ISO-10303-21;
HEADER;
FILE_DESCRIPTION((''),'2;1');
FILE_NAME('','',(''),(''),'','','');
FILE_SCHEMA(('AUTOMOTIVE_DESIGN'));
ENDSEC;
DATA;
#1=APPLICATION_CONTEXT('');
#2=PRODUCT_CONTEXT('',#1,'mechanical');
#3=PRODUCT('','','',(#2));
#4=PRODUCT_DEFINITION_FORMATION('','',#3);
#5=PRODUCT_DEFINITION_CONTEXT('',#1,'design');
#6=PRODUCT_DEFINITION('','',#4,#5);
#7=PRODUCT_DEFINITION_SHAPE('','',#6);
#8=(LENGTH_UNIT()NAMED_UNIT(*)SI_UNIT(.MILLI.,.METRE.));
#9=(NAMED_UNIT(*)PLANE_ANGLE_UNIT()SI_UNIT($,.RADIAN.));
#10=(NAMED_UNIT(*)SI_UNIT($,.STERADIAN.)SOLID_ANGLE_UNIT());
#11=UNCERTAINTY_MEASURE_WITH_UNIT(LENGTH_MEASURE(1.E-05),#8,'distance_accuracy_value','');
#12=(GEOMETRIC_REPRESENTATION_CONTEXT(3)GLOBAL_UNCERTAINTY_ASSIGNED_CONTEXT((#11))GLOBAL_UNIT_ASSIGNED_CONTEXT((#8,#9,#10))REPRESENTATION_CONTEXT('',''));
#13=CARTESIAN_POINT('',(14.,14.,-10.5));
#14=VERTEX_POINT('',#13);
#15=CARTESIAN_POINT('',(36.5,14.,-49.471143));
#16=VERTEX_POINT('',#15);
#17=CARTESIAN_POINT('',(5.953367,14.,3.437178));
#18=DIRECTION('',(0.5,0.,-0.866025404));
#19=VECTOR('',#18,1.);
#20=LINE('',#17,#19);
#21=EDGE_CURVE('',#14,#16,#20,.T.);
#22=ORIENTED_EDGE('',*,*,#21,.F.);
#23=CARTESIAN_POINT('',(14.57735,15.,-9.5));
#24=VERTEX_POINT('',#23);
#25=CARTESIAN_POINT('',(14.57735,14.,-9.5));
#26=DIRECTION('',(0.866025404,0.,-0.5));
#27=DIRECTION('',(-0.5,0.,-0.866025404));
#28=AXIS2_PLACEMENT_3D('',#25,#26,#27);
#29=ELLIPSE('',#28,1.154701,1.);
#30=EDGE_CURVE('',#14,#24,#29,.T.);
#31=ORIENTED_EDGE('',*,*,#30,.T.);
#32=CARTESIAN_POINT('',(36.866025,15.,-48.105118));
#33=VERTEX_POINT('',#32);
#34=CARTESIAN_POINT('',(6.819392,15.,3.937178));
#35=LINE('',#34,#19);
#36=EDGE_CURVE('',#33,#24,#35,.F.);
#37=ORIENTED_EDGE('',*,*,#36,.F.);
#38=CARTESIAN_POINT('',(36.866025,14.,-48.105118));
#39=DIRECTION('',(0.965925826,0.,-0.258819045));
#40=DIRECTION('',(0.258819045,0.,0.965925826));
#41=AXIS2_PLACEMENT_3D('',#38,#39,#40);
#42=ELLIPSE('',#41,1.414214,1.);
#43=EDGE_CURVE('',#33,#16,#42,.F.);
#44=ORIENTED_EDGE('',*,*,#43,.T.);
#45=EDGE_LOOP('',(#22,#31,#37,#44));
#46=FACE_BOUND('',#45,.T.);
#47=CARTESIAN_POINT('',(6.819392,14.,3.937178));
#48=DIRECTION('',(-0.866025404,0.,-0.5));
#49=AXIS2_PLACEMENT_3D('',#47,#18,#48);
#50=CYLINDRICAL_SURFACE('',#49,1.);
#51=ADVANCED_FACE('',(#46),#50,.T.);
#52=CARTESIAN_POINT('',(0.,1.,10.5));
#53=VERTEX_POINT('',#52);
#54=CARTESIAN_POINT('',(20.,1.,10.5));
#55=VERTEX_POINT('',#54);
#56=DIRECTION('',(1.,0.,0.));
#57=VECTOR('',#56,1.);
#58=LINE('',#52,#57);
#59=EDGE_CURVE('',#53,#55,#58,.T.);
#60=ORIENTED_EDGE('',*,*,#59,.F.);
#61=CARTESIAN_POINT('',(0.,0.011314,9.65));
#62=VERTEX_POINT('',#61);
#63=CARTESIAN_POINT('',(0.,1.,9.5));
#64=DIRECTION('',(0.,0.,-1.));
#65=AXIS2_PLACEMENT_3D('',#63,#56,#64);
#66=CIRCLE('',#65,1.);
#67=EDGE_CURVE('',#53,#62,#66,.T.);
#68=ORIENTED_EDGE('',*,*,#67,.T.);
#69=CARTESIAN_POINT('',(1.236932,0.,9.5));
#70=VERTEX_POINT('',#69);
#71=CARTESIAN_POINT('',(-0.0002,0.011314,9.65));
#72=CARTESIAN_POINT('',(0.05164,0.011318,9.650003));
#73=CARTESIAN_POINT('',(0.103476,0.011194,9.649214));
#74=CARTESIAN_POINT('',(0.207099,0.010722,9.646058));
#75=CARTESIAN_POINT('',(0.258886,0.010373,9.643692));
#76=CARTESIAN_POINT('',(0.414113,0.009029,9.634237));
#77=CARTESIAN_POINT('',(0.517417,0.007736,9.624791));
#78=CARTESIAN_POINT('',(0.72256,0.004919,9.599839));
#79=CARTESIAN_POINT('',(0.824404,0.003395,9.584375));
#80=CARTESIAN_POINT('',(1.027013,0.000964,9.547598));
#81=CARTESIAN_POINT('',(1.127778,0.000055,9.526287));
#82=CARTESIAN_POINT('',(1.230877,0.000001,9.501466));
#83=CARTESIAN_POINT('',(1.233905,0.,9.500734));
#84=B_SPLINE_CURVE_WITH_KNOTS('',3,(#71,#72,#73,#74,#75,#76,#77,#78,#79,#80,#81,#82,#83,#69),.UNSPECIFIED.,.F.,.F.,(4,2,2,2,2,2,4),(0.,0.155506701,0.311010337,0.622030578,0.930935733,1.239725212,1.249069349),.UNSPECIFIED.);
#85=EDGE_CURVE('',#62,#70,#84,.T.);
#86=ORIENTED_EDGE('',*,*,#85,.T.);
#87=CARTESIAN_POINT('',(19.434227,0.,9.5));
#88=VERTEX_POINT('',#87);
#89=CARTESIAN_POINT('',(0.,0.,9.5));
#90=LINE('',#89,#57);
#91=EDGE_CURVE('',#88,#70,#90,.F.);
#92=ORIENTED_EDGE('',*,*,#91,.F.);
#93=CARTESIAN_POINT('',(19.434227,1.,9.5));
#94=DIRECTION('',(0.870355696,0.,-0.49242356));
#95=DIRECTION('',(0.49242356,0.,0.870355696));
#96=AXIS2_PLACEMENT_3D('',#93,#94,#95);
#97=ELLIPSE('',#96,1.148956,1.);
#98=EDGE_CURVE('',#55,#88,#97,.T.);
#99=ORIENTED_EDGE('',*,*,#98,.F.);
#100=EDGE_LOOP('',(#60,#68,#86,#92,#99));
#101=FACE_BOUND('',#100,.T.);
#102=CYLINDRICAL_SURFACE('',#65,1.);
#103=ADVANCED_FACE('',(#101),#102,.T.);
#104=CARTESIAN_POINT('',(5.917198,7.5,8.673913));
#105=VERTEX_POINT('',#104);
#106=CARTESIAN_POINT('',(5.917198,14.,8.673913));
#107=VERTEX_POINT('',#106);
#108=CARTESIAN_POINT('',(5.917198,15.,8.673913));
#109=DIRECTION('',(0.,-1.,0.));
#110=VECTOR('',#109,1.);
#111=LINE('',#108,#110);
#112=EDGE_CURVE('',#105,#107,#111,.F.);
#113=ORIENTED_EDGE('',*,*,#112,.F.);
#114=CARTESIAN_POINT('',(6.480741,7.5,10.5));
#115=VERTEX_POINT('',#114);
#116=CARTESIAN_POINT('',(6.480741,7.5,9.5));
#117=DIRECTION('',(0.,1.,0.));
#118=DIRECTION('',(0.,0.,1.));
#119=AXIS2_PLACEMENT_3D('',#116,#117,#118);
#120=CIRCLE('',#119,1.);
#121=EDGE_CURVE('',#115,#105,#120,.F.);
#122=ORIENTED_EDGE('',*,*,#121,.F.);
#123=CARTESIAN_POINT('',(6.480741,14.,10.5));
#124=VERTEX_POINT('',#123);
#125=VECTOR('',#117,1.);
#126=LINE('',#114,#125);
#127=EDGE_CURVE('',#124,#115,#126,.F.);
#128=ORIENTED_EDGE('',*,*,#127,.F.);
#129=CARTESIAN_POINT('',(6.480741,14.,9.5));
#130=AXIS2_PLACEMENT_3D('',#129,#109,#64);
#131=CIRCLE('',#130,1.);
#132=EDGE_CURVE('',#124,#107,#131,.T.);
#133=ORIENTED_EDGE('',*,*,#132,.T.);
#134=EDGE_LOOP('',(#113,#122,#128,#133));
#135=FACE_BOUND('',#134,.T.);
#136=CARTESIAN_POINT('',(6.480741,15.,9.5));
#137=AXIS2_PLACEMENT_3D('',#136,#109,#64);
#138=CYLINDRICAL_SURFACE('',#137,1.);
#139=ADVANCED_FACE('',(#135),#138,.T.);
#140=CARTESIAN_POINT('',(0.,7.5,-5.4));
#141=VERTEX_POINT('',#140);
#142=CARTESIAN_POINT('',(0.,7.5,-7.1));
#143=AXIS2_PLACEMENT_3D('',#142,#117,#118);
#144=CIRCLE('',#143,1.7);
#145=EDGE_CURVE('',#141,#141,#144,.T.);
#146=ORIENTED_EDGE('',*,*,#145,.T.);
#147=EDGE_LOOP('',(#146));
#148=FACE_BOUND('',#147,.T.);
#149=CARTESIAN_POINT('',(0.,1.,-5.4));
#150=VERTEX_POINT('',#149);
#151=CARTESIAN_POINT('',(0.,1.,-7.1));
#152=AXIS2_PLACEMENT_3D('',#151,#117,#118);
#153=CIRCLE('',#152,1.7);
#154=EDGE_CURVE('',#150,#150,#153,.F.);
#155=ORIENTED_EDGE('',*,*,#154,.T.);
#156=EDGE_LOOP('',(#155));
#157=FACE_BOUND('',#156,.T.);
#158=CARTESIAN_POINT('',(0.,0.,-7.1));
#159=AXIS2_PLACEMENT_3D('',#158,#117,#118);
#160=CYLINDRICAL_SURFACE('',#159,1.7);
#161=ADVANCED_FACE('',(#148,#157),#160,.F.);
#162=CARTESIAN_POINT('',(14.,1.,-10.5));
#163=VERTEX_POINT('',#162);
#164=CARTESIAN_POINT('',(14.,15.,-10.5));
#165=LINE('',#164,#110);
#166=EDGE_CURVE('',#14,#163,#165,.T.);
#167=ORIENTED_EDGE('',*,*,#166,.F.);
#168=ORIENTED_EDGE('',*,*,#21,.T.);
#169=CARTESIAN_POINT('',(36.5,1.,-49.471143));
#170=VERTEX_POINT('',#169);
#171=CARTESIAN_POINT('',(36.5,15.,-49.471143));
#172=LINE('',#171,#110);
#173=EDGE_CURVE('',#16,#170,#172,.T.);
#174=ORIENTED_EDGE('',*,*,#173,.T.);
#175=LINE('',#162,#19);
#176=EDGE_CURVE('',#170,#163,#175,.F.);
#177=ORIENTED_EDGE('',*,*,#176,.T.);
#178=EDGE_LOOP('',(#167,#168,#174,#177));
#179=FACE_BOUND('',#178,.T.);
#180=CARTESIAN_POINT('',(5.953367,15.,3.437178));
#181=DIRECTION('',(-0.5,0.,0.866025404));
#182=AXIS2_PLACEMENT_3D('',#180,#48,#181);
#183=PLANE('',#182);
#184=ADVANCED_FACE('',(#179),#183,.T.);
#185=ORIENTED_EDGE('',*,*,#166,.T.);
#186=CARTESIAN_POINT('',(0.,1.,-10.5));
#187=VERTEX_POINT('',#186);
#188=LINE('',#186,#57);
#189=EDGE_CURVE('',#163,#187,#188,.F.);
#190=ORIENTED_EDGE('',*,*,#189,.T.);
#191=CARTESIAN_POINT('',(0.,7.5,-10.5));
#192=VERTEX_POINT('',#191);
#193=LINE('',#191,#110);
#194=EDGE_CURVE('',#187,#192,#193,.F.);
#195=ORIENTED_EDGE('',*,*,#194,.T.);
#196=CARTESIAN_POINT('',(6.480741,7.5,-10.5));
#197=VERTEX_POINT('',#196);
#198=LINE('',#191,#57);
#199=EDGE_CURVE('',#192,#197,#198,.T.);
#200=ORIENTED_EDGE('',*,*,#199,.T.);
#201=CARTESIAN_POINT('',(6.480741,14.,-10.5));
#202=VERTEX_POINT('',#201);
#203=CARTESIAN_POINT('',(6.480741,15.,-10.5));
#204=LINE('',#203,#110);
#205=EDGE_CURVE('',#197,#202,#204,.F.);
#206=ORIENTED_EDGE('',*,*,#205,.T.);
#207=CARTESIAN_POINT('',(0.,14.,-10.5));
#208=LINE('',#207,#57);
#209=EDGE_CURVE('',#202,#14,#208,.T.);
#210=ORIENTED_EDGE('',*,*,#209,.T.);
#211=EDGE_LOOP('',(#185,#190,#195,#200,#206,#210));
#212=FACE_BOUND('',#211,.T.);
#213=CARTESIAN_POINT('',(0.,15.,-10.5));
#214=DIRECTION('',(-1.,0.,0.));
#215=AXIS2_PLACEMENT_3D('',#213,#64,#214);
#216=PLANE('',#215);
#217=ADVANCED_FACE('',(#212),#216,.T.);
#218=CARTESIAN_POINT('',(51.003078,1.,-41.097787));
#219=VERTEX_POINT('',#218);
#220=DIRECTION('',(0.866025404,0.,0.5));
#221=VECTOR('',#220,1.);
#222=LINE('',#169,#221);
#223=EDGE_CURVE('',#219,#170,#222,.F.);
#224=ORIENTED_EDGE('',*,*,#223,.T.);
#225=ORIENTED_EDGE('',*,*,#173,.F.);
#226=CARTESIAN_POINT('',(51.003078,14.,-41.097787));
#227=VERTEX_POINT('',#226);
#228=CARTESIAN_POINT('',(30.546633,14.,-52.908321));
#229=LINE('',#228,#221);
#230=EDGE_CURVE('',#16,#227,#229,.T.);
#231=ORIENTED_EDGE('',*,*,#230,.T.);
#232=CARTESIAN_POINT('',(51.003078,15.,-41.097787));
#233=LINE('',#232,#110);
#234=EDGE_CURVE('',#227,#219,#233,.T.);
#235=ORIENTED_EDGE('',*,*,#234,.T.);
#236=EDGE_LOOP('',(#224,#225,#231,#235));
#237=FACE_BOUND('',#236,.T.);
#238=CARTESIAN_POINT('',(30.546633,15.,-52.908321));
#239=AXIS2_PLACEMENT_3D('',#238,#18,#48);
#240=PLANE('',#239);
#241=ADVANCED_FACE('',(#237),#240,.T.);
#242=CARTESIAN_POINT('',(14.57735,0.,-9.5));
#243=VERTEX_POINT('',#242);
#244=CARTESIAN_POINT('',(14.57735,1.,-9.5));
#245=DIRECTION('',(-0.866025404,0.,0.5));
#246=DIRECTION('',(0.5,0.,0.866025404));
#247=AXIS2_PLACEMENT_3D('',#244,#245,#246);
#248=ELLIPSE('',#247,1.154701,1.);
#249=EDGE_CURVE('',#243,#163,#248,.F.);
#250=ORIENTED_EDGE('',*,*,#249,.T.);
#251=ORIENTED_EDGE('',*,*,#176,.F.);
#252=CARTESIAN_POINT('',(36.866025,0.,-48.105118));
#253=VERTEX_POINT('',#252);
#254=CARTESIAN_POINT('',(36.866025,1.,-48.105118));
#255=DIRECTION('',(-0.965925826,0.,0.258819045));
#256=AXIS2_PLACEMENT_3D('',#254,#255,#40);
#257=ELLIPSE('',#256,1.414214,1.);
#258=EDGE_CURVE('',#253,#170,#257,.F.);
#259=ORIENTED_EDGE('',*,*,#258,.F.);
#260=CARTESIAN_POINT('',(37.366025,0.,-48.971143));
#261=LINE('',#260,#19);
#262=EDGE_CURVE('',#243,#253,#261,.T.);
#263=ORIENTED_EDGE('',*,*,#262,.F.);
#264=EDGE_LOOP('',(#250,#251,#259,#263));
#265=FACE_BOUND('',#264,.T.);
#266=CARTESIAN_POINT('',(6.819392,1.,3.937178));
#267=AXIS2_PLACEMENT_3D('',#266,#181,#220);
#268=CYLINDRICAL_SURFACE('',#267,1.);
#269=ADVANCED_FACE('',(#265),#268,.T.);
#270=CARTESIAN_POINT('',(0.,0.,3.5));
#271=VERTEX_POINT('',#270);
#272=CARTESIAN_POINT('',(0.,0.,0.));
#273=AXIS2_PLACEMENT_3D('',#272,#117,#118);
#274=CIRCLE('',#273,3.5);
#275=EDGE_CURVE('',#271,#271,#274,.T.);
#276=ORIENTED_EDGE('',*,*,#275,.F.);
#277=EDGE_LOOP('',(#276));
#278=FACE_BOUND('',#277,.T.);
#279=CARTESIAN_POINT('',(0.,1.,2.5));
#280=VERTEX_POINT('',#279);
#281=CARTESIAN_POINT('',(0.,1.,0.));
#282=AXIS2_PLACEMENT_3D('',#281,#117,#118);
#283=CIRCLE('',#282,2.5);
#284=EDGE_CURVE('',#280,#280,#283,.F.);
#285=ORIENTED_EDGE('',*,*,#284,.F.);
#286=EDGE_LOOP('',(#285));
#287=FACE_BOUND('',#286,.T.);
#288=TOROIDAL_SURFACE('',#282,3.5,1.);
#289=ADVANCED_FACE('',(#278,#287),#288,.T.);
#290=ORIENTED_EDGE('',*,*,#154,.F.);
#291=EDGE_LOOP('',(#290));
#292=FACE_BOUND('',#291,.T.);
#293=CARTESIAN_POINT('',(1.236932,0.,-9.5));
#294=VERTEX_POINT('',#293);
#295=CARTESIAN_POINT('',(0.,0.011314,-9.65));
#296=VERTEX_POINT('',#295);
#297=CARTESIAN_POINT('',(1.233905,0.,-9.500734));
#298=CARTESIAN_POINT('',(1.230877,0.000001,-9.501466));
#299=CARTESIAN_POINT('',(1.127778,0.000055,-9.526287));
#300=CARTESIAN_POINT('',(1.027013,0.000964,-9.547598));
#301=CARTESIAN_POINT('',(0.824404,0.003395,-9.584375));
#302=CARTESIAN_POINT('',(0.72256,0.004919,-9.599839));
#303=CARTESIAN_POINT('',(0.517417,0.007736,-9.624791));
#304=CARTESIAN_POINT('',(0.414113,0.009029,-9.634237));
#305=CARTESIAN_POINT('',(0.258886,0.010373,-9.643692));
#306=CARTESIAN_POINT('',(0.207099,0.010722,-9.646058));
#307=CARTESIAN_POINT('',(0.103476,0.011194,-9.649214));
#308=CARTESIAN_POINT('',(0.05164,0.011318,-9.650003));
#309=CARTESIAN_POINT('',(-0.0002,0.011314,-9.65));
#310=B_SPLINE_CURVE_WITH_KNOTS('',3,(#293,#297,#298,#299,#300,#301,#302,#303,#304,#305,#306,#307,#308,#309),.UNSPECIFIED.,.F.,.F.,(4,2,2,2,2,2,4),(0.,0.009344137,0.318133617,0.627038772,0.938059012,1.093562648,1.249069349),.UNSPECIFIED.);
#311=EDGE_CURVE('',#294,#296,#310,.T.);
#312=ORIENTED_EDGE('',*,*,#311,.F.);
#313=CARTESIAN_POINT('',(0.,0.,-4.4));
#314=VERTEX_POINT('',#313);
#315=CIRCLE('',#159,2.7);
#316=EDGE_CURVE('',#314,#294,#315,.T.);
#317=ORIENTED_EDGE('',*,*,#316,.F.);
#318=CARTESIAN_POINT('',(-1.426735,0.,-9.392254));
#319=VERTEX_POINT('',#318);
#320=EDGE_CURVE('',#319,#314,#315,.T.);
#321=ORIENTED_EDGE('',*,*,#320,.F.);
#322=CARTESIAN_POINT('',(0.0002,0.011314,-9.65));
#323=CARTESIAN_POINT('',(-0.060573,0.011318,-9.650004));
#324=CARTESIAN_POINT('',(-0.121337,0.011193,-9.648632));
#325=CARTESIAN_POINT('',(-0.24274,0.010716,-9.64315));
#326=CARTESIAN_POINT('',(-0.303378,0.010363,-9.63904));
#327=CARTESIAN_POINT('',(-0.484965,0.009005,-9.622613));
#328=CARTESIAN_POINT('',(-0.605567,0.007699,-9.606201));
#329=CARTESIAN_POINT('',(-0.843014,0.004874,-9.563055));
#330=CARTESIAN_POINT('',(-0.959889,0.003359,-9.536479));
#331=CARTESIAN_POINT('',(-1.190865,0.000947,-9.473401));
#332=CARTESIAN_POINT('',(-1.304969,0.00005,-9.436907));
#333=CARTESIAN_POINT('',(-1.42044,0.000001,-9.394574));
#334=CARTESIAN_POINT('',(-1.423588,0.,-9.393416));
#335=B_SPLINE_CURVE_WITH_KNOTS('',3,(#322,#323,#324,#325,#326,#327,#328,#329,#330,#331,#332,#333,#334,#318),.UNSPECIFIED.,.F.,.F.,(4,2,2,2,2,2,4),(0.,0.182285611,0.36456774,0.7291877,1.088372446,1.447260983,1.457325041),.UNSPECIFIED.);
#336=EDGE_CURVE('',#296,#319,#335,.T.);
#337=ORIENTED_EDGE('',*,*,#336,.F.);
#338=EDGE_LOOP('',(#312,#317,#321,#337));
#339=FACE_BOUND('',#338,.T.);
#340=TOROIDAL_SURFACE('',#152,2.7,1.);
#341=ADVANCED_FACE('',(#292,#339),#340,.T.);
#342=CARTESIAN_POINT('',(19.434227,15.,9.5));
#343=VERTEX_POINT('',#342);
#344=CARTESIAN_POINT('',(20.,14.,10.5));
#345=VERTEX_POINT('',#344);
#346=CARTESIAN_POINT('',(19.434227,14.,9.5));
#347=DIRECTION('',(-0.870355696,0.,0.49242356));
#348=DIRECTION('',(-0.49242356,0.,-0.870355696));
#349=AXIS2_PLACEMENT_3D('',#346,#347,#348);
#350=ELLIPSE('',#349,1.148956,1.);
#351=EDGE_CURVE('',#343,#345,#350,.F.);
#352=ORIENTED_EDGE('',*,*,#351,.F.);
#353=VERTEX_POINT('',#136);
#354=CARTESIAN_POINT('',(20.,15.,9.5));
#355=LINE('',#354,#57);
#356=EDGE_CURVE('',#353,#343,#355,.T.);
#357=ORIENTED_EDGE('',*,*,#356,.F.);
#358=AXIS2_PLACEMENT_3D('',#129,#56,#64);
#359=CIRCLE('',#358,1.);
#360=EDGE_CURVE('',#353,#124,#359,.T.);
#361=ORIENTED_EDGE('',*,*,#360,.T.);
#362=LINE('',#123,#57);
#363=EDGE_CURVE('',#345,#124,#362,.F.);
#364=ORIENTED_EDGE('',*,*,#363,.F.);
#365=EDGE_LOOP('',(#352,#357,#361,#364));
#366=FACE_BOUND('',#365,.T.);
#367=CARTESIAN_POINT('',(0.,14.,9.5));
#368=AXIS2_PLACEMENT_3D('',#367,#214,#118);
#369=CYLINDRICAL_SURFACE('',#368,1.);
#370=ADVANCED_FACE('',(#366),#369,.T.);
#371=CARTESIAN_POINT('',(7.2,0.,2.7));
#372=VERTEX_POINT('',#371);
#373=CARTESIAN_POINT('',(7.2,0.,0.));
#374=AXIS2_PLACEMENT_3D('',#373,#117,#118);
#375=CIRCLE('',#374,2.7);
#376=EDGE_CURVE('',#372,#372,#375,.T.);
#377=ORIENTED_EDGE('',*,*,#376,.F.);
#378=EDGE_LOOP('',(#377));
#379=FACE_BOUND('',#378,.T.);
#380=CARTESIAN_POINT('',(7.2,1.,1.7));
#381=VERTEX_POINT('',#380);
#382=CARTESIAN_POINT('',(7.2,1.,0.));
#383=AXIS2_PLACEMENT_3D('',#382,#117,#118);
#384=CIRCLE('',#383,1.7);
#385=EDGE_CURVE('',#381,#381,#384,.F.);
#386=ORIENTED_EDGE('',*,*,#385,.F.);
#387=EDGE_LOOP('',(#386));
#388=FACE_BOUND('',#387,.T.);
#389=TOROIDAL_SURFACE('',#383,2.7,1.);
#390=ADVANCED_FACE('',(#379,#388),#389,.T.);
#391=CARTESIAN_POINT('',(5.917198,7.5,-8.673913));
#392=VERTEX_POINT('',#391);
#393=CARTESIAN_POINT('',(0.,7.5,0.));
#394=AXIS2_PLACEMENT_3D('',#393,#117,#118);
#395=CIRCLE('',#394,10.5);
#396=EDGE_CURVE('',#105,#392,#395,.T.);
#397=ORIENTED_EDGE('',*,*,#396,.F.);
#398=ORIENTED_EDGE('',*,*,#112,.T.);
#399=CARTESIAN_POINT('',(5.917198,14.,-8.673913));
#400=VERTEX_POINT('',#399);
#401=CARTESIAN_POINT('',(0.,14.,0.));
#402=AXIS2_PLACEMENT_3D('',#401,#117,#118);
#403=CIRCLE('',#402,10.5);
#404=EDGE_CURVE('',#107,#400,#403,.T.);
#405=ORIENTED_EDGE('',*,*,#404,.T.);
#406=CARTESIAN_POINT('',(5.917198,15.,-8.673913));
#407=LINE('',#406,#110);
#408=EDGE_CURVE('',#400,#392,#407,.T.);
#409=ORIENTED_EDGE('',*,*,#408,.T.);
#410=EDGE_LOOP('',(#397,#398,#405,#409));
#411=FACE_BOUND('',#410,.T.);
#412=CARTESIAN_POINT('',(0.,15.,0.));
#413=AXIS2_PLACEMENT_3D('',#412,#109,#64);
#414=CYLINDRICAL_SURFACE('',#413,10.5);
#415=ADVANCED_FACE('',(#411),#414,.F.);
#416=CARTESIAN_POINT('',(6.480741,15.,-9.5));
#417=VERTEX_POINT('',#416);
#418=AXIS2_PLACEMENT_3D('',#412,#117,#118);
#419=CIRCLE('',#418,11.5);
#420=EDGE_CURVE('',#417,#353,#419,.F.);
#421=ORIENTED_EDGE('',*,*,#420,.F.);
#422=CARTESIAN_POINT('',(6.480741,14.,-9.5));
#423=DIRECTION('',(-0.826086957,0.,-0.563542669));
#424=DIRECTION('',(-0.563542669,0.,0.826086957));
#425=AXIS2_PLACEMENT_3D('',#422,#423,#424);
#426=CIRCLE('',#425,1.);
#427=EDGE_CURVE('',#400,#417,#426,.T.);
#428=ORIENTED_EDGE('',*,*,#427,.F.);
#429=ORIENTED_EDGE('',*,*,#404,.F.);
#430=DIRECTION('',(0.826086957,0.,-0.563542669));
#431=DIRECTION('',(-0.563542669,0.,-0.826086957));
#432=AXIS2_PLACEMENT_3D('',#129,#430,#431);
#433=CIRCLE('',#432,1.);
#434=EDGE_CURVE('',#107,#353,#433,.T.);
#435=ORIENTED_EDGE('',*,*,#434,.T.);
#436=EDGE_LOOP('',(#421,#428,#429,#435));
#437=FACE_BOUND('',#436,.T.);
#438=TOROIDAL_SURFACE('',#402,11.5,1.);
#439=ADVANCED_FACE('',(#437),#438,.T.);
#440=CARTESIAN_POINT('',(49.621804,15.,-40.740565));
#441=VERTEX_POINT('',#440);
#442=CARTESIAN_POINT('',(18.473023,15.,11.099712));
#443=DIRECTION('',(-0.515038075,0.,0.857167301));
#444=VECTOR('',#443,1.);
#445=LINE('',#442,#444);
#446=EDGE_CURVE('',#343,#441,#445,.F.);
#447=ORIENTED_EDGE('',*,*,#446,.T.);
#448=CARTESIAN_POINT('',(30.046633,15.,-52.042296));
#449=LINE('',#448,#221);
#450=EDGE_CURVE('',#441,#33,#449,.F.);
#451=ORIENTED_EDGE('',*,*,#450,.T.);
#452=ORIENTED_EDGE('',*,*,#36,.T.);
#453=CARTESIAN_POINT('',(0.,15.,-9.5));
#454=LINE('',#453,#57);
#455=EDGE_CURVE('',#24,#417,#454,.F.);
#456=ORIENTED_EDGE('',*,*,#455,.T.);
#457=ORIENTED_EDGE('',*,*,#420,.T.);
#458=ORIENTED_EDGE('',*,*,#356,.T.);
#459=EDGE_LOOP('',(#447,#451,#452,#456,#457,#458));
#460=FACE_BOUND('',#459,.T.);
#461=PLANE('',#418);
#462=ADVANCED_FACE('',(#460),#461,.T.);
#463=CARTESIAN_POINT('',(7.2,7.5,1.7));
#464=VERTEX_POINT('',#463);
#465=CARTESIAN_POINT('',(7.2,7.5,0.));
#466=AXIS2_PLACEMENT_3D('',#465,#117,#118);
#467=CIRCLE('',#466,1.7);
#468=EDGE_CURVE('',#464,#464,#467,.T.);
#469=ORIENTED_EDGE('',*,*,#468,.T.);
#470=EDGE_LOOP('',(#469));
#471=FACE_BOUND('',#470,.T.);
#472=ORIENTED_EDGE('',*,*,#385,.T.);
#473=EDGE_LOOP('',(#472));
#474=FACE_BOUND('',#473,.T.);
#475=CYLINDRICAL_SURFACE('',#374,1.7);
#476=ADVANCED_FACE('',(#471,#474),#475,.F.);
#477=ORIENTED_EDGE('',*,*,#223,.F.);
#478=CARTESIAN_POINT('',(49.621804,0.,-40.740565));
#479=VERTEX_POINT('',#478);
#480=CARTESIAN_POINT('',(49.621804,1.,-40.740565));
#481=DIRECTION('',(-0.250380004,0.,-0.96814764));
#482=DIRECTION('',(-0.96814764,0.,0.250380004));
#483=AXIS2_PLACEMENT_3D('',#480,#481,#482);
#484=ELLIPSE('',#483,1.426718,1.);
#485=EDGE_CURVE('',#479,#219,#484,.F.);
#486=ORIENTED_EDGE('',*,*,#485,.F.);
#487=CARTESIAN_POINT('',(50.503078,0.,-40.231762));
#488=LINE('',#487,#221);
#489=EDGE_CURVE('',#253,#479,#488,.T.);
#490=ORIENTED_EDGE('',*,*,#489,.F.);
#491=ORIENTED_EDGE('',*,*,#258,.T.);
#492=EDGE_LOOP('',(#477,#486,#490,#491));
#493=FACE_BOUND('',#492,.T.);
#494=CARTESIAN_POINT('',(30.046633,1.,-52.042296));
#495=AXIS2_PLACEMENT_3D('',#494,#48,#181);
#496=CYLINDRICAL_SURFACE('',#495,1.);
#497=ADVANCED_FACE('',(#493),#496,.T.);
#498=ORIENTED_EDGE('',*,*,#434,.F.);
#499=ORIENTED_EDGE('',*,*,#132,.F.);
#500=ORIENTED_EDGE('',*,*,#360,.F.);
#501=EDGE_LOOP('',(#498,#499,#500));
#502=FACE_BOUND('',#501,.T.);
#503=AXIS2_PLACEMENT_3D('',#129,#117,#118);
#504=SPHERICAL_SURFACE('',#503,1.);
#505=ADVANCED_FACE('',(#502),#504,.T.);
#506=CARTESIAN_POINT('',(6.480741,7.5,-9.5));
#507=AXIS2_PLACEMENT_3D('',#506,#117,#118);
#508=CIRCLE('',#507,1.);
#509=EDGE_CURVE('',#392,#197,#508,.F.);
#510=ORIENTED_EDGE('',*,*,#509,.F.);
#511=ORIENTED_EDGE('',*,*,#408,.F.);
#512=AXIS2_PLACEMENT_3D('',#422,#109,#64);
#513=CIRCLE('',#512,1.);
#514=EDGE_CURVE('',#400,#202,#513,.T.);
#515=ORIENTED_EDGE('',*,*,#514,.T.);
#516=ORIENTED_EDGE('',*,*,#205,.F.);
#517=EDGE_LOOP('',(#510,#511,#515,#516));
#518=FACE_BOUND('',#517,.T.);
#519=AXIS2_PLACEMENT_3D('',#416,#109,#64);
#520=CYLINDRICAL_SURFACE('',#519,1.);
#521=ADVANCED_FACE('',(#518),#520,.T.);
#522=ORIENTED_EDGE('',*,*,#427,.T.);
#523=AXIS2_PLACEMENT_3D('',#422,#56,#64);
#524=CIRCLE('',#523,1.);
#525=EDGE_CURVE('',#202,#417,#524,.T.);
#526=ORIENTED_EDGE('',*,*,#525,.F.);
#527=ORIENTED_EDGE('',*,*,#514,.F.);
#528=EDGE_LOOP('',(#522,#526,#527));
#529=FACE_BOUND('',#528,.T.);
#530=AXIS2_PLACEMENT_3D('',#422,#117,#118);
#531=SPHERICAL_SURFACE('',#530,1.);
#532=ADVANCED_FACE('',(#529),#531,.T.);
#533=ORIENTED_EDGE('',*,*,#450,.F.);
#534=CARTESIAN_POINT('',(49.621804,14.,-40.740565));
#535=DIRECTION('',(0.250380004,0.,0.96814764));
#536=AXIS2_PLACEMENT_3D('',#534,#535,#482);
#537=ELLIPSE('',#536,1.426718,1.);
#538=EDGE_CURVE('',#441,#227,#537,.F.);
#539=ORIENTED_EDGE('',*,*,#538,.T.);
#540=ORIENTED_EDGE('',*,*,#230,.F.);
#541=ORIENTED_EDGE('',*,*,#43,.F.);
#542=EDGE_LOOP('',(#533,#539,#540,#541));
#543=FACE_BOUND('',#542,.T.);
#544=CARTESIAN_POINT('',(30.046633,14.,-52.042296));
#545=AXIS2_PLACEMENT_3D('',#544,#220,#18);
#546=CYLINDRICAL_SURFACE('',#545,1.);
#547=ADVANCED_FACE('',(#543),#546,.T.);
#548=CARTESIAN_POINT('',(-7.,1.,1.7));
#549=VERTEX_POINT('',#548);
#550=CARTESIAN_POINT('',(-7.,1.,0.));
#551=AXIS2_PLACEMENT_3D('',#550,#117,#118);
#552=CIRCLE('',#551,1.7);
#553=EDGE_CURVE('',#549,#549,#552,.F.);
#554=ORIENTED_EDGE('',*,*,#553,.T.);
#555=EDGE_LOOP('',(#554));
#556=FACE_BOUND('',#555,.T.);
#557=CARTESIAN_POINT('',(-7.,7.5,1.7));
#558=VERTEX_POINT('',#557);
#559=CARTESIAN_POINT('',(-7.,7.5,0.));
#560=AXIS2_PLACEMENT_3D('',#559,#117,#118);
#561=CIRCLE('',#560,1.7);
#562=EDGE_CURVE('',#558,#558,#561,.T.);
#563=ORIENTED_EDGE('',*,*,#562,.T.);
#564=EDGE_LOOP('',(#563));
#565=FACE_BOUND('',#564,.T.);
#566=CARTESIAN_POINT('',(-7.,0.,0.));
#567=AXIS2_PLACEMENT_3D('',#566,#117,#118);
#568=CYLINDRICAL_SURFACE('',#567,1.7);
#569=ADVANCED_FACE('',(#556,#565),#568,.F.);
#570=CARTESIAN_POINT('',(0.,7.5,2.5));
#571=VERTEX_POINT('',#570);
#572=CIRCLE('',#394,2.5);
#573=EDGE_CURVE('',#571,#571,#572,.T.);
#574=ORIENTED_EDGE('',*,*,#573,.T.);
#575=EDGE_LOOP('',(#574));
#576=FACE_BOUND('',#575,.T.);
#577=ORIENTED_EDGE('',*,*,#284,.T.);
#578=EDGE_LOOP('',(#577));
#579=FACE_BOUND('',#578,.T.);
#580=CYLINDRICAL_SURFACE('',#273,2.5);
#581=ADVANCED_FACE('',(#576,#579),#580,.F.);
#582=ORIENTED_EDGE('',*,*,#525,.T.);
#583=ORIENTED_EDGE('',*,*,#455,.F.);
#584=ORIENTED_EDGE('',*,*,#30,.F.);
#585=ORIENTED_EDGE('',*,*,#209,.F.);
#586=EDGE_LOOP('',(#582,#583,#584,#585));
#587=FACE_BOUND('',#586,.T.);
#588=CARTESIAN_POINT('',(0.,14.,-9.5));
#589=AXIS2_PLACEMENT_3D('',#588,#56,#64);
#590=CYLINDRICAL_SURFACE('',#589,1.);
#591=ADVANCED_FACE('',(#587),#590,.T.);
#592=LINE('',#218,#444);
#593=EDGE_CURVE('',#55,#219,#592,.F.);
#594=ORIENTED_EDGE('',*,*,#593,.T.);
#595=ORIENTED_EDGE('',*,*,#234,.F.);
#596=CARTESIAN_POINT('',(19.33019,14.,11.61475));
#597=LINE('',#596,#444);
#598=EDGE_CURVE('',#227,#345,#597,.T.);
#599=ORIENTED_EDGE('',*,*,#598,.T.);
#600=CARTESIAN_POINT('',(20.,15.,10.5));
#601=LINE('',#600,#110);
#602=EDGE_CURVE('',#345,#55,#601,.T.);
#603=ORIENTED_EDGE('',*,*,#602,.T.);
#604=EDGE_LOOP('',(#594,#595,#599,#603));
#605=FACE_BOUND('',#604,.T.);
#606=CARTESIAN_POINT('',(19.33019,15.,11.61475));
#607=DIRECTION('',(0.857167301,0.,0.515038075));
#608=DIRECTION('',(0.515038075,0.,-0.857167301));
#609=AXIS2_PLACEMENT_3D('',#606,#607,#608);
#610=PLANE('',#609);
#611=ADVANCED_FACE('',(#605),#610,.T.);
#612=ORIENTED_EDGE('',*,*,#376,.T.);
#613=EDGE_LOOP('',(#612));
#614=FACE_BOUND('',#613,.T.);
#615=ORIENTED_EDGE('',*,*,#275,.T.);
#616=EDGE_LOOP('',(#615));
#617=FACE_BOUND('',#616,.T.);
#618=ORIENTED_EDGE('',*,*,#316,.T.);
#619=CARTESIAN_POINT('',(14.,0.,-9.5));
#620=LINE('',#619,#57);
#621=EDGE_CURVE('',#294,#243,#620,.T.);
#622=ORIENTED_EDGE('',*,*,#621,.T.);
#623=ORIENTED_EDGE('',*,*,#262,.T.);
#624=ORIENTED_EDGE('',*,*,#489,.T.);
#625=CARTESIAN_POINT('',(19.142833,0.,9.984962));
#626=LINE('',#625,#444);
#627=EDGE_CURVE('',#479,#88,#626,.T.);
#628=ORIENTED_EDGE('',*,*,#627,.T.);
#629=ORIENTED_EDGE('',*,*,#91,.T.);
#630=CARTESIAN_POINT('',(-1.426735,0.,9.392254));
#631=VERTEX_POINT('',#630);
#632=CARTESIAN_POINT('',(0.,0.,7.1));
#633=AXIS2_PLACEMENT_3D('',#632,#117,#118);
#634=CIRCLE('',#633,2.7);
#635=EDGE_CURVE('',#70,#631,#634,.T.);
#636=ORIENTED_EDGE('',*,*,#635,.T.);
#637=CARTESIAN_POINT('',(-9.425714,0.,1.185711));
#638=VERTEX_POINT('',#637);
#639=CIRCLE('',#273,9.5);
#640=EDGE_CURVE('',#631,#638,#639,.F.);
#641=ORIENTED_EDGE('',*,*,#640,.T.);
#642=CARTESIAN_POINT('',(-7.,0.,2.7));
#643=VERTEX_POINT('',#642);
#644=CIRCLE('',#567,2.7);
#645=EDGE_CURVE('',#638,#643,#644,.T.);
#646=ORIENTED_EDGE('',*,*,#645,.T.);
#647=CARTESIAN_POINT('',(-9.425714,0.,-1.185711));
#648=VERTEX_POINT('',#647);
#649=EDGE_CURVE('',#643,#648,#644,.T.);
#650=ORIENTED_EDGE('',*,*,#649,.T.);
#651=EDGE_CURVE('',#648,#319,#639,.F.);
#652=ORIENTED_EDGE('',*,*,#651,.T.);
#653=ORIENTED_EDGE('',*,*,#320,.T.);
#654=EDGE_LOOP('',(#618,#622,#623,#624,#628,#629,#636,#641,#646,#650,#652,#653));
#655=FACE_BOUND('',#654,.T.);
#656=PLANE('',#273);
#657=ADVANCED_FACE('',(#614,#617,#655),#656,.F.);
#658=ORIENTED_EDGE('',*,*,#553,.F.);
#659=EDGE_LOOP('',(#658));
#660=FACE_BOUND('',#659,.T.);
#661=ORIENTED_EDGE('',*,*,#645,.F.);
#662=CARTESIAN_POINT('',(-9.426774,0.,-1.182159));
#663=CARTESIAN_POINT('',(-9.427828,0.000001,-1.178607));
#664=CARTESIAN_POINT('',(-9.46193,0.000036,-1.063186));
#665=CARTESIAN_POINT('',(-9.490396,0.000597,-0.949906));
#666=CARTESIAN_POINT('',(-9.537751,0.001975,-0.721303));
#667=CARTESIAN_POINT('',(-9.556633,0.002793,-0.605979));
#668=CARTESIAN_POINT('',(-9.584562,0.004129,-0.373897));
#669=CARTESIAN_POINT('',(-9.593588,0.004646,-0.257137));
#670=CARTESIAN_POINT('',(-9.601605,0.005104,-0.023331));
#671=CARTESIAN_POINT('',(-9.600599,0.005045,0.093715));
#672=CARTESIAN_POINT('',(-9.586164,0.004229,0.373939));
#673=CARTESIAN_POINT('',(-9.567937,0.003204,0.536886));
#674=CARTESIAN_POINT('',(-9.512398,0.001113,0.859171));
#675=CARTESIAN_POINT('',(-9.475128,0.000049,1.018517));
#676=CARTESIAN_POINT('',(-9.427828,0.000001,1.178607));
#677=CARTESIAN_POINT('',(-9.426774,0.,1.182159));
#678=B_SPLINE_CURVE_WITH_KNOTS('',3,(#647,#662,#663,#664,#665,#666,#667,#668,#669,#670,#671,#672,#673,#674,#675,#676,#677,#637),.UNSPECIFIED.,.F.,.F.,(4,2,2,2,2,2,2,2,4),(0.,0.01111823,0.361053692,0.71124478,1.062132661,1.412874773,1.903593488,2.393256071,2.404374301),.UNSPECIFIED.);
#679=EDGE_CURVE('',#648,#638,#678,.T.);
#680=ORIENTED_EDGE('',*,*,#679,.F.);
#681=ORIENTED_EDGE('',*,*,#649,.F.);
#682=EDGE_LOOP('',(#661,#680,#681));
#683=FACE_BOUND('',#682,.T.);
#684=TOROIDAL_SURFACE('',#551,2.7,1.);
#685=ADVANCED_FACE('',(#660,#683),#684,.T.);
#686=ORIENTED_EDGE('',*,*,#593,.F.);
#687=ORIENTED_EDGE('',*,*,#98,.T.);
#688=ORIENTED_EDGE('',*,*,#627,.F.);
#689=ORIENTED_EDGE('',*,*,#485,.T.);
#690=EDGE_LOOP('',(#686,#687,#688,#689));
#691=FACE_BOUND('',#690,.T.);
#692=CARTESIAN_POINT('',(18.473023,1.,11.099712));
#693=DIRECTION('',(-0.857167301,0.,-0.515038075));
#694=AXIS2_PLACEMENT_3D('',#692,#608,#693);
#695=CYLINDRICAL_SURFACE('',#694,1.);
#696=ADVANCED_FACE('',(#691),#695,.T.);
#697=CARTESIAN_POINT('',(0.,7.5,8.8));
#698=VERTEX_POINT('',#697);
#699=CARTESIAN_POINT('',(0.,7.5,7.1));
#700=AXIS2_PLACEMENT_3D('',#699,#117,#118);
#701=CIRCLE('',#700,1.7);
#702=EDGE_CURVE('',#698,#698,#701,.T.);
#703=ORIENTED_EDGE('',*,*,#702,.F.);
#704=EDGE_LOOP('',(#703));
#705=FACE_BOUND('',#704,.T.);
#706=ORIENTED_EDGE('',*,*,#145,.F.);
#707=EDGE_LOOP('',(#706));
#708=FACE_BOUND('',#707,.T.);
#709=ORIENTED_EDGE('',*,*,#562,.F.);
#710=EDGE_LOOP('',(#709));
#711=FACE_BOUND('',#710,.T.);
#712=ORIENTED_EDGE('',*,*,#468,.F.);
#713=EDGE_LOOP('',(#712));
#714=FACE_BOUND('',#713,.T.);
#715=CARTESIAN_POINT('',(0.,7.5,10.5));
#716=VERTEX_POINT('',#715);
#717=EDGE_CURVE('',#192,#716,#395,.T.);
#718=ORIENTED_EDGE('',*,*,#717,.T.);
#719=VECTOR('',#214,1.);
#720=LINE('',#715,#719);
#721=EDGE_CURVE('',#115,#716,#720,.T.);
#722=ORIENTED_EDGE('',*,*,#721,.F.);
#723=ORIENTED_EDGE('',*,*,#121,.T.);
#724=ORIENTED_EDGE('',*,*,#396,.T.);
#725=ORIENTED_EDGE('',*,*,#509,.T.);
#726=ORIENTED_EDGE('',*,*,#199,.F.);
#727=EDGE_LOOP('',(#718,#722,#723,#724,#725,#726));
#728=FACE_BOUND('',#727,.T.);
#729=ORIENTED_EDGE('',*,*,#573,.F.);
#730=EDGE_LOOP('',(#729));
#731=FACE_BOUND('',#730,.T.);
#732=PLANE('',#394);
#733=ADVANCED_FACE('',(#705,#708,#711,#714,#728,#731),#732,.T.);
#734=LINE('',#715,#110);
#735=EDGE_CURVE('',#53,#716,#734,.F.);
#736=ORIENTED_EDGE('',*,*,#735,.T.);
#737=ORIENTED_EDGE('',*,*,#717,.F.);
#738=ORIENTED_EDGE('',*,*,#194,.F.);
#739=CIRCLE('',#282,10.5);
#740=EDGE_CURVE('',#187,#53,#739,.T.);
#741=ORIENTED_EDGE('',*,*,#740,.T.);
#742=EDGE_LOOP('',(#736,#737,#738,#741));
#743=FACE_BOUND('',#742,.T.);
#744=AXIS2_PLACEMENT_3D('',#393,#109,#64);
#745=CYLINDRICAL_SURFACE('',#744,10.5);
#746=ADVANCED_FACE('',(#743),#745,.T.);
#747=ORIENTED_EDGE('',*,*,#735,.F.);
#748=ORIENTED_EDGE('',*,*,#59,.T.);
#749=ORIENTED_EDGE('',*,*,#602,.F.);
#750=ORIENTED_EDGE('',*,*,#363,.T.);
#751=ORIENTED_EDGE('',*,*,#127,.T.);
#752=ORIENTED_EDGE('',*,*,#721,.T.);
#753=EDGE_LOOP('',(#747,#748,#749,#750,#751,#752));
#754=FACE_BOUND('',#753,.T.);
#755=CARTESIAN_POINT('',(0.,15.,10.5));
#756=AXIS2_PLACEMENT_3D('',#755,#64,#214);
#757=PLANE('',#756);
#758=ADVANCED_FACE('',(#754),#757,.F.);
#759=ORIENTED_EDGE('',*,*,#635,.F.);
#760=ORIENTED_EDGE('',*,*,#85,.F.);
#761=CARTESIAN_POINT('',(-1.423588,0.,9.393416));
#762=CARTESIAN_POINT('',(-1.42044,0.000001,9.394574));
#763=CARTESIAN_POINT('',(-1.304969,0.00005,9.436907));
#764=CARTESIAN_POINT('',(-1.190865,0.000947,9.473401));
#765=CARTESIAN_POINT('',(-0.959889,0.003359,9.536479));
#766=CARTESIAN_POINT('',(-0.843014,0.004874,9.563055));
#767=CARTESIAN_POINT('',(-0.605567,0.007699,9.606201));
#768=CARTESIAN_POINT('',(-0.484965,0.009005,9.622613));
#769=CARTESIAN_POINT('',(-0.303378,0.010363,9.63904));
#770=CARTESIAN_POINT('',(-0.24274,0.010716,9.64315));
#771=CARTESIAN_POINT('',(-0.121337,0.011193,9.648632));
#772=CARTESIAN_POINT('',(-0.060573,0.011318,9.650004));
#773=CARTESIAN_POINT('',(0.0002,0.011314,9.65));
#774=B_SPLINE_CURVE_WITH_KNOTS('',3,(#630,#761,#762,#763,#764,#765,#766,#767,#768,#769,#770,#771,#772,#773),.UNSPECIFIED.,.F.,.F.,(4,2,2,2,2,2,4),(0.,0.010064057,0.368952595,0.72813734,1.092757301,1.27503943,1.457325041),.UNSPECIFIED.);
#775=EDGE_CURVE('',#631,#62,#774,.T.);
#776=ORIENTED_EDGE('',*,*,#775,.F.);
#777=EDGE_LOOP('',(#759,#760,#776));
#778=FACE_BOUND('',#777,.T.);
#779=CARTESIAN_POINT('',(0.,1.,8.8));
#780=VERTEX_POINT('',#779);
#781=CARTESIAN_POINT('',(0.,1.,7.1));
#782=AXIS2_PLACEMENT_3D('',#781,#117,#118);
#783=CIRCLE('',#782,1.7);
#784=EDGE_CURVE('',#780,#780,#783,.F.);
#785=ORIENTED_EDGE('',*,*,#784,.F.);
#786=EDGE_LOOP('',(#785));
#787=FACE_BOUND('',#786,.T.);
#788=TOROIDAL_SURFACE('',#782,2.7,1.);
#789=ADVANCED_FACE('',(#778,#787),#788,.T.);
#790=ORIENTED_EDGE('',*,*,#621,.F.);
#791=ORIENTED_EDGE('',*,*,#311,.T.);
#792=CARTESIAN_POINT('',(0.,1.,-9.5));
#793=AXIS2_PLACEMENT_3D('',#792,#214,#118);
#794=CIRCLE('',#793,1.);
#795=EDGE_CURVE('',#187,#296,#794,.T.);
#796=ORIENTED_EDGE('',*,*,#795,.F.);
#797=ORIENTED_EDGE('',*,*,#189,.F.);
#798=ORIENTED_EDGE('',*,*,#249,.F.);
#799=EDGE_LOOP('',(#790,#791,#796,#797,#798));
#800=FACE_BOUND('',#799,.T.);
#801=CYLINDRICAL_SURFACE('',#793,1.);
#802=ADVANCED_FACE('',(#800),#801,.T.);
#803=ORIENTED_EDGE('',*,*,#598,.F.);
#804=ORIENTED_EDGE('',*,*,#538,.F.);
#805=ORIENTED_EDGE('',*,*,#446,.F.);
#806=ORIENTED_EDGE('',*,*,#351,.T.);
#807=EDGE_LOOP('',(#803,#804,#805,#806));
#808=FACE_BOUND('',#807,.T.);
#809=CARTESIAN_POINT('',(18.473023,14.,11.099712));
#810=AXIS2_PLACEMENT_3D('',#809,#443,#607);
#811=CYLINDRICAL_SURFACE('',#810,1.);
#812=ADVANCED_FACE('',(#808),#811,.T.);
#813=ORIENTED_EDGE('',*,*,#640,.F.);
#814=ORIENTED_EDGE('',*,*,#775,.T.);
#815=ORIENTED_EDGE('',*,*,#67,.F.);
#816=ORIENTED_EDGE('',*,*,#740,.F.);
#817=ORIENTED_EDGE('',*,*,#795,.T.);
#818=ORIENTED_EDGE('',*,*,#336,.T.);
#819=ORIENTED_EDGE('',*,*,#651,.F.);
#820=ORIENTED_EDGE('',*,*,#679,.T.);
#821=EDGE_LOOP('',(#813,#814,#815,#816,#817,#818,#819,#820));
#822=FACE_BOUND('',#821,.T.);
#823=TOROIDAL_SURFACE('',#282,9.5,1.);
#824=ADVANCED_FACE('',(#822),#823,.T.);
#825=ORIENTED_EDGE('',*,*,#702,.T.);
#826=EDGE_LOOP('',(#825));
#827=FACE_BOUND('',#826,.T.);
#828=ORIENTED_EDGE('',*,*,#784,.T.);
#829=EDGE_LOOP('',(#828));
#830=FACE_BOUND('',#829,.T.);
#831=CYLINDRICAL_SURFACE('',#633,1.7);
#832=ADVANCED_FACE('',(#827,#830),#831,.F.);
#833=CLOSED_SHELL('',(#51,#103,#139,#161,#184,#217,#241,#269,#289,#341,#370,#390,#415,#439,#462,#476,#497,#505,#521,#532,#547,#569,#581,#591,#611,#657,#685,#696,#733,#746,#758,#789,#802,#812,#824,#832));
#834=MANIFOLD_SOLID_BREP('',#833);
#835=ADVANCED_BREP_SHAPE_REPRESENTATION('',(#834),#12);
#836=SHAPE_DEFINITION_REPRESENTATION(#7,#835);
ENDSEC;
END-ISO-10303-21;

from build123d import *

# Parameters (mm, degrees)
BOSS_EXTRUDE1_DEPTH = 15
SKETCH2_R           = 10.5
BOSS_EXTRUDE2_DEPTH = 7.5
FILLET1_START       = 7.5
FILLET1_DEPTH       = 8.5
SKETCH3_R           = 2.5
SKETCH3_R_2         = 1.7
CUT_EXTRUDE1_DEPTH  = 72.448988785
FILLET4_R           = 1


with BuildPart() as part:
    # Sketch1 → Boss-Extrude1 (new body)
    with BuildSketch(Plane(origin=(0, 0, 0), x_dir=(1, 0, 0), z_dir=(0, 1, 0))):
        with BuildLine():
            ThreePointArc((10.5, 0), (7.424621202, -7.424621202), (0, -10.5))
            Line((0, -10.5), (20, -10.5))
            Line((20, -10.5), (51.003078258, 41.097787034))
            Line((51.003078258, 41.097787034), (36.5, 49.47114317))
            Line((36.5, 49.47114317), (14, 10.5))
            Line((14, 10.5), (0, 10.5))
            ThreePointArc((0, 10.5), (7.424621202, 7.424621202), (10.5, 0))
        make_face()
    extrude(amount=BOSS_EXTRUDE1_DEPTH)

    # Sketch2 → Boss-Extrude2 (add)
    with BuildSketch(Plane(origin=(0, 0, 0), x_dir=(1, 0, 0), z_dir=(0, 1, 0))):
        Circle(SKETCH2_R)
    extrude(amount=BOSS_EXTRUDE2_DEPTH)

    # Fillet1: read off the stored shape, not the designer's step
    # Fillet1 outline → Fillet1 (cut)
    with BuildSketch(Plane(origin=(0, 0, 0), x_dir=(1, 0, 0), z_dir=(0, 1, 0)).offset(FILLET1_START)):
        with BuildLine():
            ThreePointArc((0, 10.5), (3.096281079, 10.033097402), (5.917198029, 8.673913043))
            ThreePointArc((5.917198029, 8.673913043), (5.525207613, 9.794883912), (6.480740698, 10.5))
            Line((6.480740698, 10.5), (0, 10.5))
        make_face()
        with BuildLine():
            ThreePointArc((6.480740698, -10.5), (5.525207613, -9.794883912), (5.917198029, -8.673913043))
            ThreePointArc((5.917198029, -8.673913043), (3.096281079, -10.033097402), (0, -10.5))
            Line((0, -10.5), (6.480740698, -10.5))
        make_face()
    extrude(amount=FILLET1_DEPTH, mode=Mode.SUBTRACT)

    # Sketch3 → Cut-Extrude1 (cut, through all)
    with BuildSketch(Plane(origin=(0, 7.5, 0), x_dir=(1, 0, 0), z_dir=(0, 1, 0))):
        with Locations(Location((0, 0, 0), (0, 0, 270))):
            Circle(SKETCH3_R)
        with Locations(Location((0, 7.1, 0), (0, 0, 270))):
            Circle(SKETCH3_R_2)
        with Locations(Location((0, -7.1, 0), (0, 0, 270))):
            Circle(SKETCH3_R_2)
        with Locations(Location((-7, 0, 0), (0, 0, 270))):
            Circle(SKETCH3_R_2)
        with Locations(Location((7.2, 0, 0), (0, 0, 270))):
            Circle(SKETCH3_R_2)
    extrude(amount=-CUT_EXTRUDE1_DEPTH, mode=Mode.SUBTRACT)

    # Fillet4
    # the kernel refuses this fillet: 1 mm, written as the material it takes off along each edge
    with BuildSketch(Plane(origin=(18.712404813, 15, 12.642918252), x_dir=(0, -1, 0), z_dir=(0.5150380749100582, 0, -0.85716730070211))) as fillet4_piece_1:
        with BuildLine():
            CenterArc((FILLET4_R, FILLET4_R), FILLET4_R, 180, 90)
            Line((0, FILLET4_R), (0, 0))
            Line((0, 0), (FILLET4_R, 0))
        make_face()
    extrude(amount=65.195701576, mode=Mode.SUBTRACT)
    with BuildSketch(Plane(origin=(53.168141767, 15, -39.847787034), x_dir=(0, -1, 0), z_dir=(-0.8660254037844399, 0, -0.49999999999999795))) as fillet4_piece_2:
        with BuildLine():
            CenterArc((FILLET4_R, FILLET4_R), FILLET4_R, 180, 90)
            Line((0, FILLET4_R), (0, 0))
            Line((0, 0), (FILLET4_R, 0))
        make_face()
    extrude(amount=21.746712272, mode=Mode.SUBTRACT)
    with BuildSketch(Plane(origin=(0, 0, 0), x_dir=(0, 0, -1), z_dir=(1, 0, 0))) as fillet4_piece_3:
        with BuildLine():
            CenterArc((10.5 - FILLET4_R, FILLET4_R), FILLET4_R, 270, 90)
            Line((10.5, FILLET4_R), (10.5, 0))
            Line((10.5, 0), (10.5 - FILLET4_R, 0))
        make_face()
    revolve(axis=Axis((0, 0, 0), (0, 1, 0)), revolution_arc=180, mode=Mode.SUBTRACT)
    with BuildSketch(Plane(origin=(37.75, 15, -51.63620668), x_dir=(0.8660254037844399, 0, 0.4999999999999977), z_dir=(-0.4999999999999977, 0, 0.8660254037844399))) as fillet4_piece_4_section:
        with BuildLine():
            CenterArc((FILLET4_R, -FILLET4_R), FILLET4_R, 90, 90)
            Line((0, -FILLET4_R), (0, 0))
            Line((0, 0), (FILLET4_R, 0))
        make_face()
    fillet4_piece_4 = extrude(amount=50, mode=Mode.PRIVATE)
    fillet4_piece_4 = split(fillet4_piece_4, bisect_by=Plane(origin=(37.75, 15, -10.5), z_dir=(0, 0, -1)), keep=Keep.TOP, mode=Mode.PRIVATE)
    add(fillet4_piece_4, mode=Mode.SUBTRACT)
    with BuildSketch(Plane(origin=(0, 15, 0), x_dir=(0.563542669449255, 0, 0.8260869565064005), z_dir=(-0.8260869565064005, 0, 0.563542669449255))) as fillet4_piece_5:
        with BuildLine():
            CenterArc((10.5 + FILLET4_R, -FILLET4_R), FILLET4_R, 90, 90)
            Line((10.5, -FILLET4_R), (10.5, 0))
            Line((10.5, 0), (10.5 + FILLET4_R, 0))
        make_face()
    revolve(axis=Axis((0, 15, 0), (0, 1, 0)), revolution_arc=111.397694483, mode=Mode.SUBTRACT)
    with BuildSketch(Plane(origin=(16.5, 15, -10.5), x_dir=(0, 0, 1), z_dir=(-1, 0, 0))) as fillet4_piece_6_section:
        with BuildLine():
            CenterArc((FILLET4_R, -FILLET4_R), FILLET4_R, 90, 90)
            Line((0, -FILLET4_R), (0, 0))
            Line((0, 0), (FILLET4_R, 0))
        make_face()
    fillet4_piece_6 = extrude(amount=10.019259302, mode=Mode.PRIVATE)
    fillet4_piece_6 = split(fillet4_piece_6, bisect_by=Plane(origin=(14.625, 15, -11.582531755), z_dir=(-0.8660254037844399, 0, -0.4999999999999977)), keep=Keep.TOP, mode=Mode.PRIVATE)
    add(fillet4_piece_6, mode=Mode.SUBTRACT)
    with BuildSketch(Plane(origin=(6.480740698, 15, 10.5), x_dir=(0, -1, 0), z_dir=(1, 0, 0))) as fillet4_piece_7:
        with BuildLine():
            CenterArc((FILLET4_R, FILLET4_R), FILLET4_R, 180, 90)
            Line((0, FILLET4_R), (0, 0))
            Line((0, 0), (FILLET4_R, 0))
        make_face()
    extrude(amount=16.019259302, mode=Mode.SUBTRACT)
    with BuildSketch(Plane(origin=(6.480740699, 15, 9.499999999), x_dir=(-1.3777317057953908e-09, 0, 1.0), z_dir=(1.0, 0, 1.3777317057953908e-09))) as fillet4_piece_8:
        with BuildLine():
            CenterArc((1.000000001 - FILLET4_R, FILLET4_R), FILLET4_R, 270, 90)
            Line((1.000000001, FILLET4_R), (1.000000001, 0))
            Line((1.000000001, 0), (1.000000001 - FILLET4_R, 0))
        make_face()
    revolve(axis=Axis((6.480740699, 15, 9.499999999), (0, -1, 0)), revolution_arc=145.698847118, mode=Mode.SUBTRACT)
    with BuildSketch(Plane(origin=(6.480740699, 15, -9.499999999), x_dir=(-0.5635426700904216, 0, 0.8260869560690076), z_dir=(0.8260869560690076, 0, 0.5635426700904216))) as fillet4_piece_9:
        with BuildLine():
            CenterArc((1.000000001 - FILLET4_R, FILLET4_R), FILLET4_R, 270, 90)
            Line((1.000000001, FILLET4_R), (1.000000001, 0))
            Line((1.000000001, 0), (1.000000001 - FILLET4_R, 0))
        make_face()
    revolve(axis=Axis((6.480740699, 15, -9.499999999), (0, -1, 0)), revolution_arc=145.698847118, mode=Mode.SUBTRACT)
    with BuildSketch(Plane(origin=(0, 0, -7.1), x_dir=(0, 0, 1), z_dir=(-1, 0, 0))) as fillet4_piece_10:
        with BuildLine():
            CenterArc((1.7 + FILLET4_R, FILLET4_R), FILLET4_R, 180, 90)
            Line((1.7, FILLET4_R), (1.7, 0))
            Line((1.7, 0), (1.7 + FILLET4_R, 0))
        make_face()
    revolve(axis=Axis((0, 0, -7.1), (0, 1, 0)), mode=Mode.SUBTRACT)
    with BuildSketch(Plane(origin=(0, 0, 7.1), x_dir=(0, 0, 1), z_dir=(-1, 0, 0))) as fillet4_piece_11:
        with BuildLine():
            CenterArc((1.7 + FILLET4_R, FILLET4_R), FILLET4_R, 180, 90)
            Line((1.7, FILLET4_R), (1.7, 0))
            Line((1.7, 0), (1.7 + FILLET4_R, 0))
        make_face()
    revolve(axis=Axis((0, 0, 7.1), (0, 1, 0)), mode=Mode.SUBTRACT)
    with BuildSketch(Plane(origin=(-7, 0, 0), x_dir=(0, 0, 1), z_dir=(-1, 0, 0))) as fillet4_piece_12:
        with BuildLine():
            CenterArc((1.7 + FILLET4_R, FILLET4_R), FILLET4_R, 180, 90)
            Line((1.7, FILLET4_R), (1.7, 0))
            Line((1.7, 0), (1.7 + FILLET4_R, 0))
        make_face()
    revolve(axis=Axis((-7, 0, 0), (0, 1, 0)), mode=Mode.SUBTRACT)
    with BuildSketch(Plane(origin=(7.2, 0, 0), x_dir=(0, 0, 1), z_dir=(-1, 0, 0))) as fillet4_piece_13:
        with BuildLine():
            CenterArc((1.7 + FILLET4_R, FILLET4_R), FILLET4_R, 180, 90)
            Line((1.7, FILLET4_R), (1.7, 0))
            Line((1.7, 0), (1.7 + FILLET4_R, 0))
        make_face()
    revolve(axis=Axis((7.2, 0, 0), (0, 1, 0)), mode=Mode.SUBTRACT)
    with BuildSketch(Plane(origin=(0, 0, 0), x_dir=(0, 0, 1), z_dir=(-1, 0, 0))) as fillet4_piece_14:
        with BuildLine():
            CenterArc((2.5 + FILLET4_R, FILLET4_R), FILLET4_R, 180, 90)
            Line((2.5, FILLET4_R), (2.5, 0))
            Line((2.5, 0), (2.5 + FILLET4_R, 0))
        make_face()
    revolve(axis=Axis((0, 0, 0), (0, 1, 0)), mode=Mode.SUBTRACT)
    with BuildSketch(Plane(origin=(16.5, 0, -10.5), x_dir=(0, 0, 1), z_dir=(-1, 0, 0))) as fillet4_piece_15_section:
        with BuildLine():
            CenterArc((FILLET4_R, FILLET4_R), FILLET4_R, 180, 90)
            Line((0, FILLET4_R), (0, 0))
            Line((0, 0), (FILLET4_R, 0))
        make_face()
    fillet4_piece_15 = extrude(amount=16.5, mode=Mode.PRIVATE)
    fillet4_piece_15 = split(fillet4_piece_15, bisect_by=Plane(origin=(14.625, 0, -11.582531755), z_dir=(-0.8660254037844399, 0, -0.4999999999999977)), keep=Keep.TOP, mode=Mode.PRIVATE)
    add(fillet4_piece_15, mode=Mode.SUBTRACT)
    with BuildSketch(Plane(origin=(37.75, 0, -51.63620668), x_dir=(0.8660254037844399, 0, 0.4999999999999977), z_dir=(-0.4999999999999977, 0, 0.8660254037844399))) as fillet4_piece_16_section:
        with BuildLine():
            CenterArc((FILLET4_R, FILLET4_R), FILLET4_R, 180, 90)
            Line((0, FILLET4_R), (0, 0))
            Line((0, 0), (FILLET4_R, 0))
        make_face()
    fillet4_piece_16 = extrude(amount=50, mode=Mode.PRIVATE)
    fillet4_piece_16 = split(fillet4_piece_16, bisect_by=Plane(origin=(37.75, 0, -10.5), z_dir=(0, 0, -1)), keep=Keep.TOP, mode=Mode.PRIVATE)
    add(fillet4_piece_16, mode=Mode.SUBTRACT)
    with BuildSketch(Plane(origin=(53.168141767, 0, -39.847787034), x_dir=(0, 1, 0), z_dir=(-0.8660254037844399, 0, -0.49999999999999795))) as fillet4_piece_17:
        with BuildLine():
            CenterArc((FILLET4_R, -FILLET4_R), FILLET4_R, 90, 90)
            Line((0, -FILLET4_R), (0, 0))
            Line((0, 0), (FILLET4_R, 0))
        make_face()
    extrude(amount=21.746712272, mode=Mode.SUBTRACT)
    with BuildSketch(Plane(origin=(18.712404813, 0, 12.642918252), x_dir=(0, 1, 0), z_dir=(0.5150380749100582, 0, -0.85716730070211))) as fillet4_piece_18:
        with BuildLine():
            CenterArc((FILLET4_R, -FILLET4_R), FILLET4_R, 90, 90)
            Line((0, -FILLET4_R), (0, 0))
            Line((0, 0), (FILLET4_R, 0))
        make_face()
    extrude(amount=65.195701576, mode=Mode.SUBTRACT)
    with BuildSketch(Plane(origin=(0, 0, 10.5), x_dir=(0, 1, 0), z_dir=(1, 0, 0))) as fillet4_piece_19:
        with BuildLine():
            CenterArc((FILLET4_R, -FILLET4_R), FILLET4_R, 90, 90)
            Line((0, -FILLET4_R), (0, 0))
            Line((0, 0), (FILLET4_R, 0))
        make_face()
    extrude(amount=22.5, mode=Mode.SUBTRACT)
    with BuildSketch(Plane(origin=(16.5, 15, -10.5), x_dir=(0, 0, 1), z_dir=(-1, 0, 0))) as fillet4_piece_20a_section:
        with BuildLine():
            CenterArc((FILLET4_R, -FILLET4_R), FILLET4_R, 90, 90)
            Line((0, -FILLET4_R), (0, 0))
            Line((0, 0), (FILLET4_R, 0))
        make_face()
    fillet4_piece_20a = extrude(amount=10.019259302, mode=Mode.PRIVATE)
    fillet4_piece_20a = split(fillet4_piece_20a, bisect_by=Plane(origin=(14.625, 15, -11.582531755), z_dir=(0.8660254037844399, 0, 0.4999999999999977)), keep=Keep.TOP, mode=Mode.PRIVATE)
    with BuildSketch(Plane(origin=(37.75, 15, -51.63620668), x_dir=(0.8660254037844399, 0, 0.4999999999999977), z_dir=(-0.4999999999999977, 0, 0.8660254037844399))) as fillet4_piece_20b_section:
        with BuildLine():
            CenterArc((FILLET4_R, -FILLET4_R), FILLET4_R, 90, 90)
            Line((0, -FILLET4_R), (0, 0))
            Line((0, 0), (FILLET4_R, 0))
        make_face()
    fillet4_piece_20b = extrude(amount=50, mode=Mode.PRIVATE)
    fillet4_piece_20b = split(fillet4_piece_20b, bisect_by=Plane(origin=(37.75, 15, -10.5), z_dir=(0, 0, 1)), keep=Keep.TOP, mode=Mode.PRIVATE)
    fillet4_piece_20 = fillet4_piece_20a & fillet4_piece_20b
    add(fillet4_piece_20, mode=Mode.SUBTRACT)
    with BuildSketch(Plane(origin=(37.75, 0, -51.63620668), x_dir=(0.8660254037844399, 0, 0.4999999999999977), z_dir=(-0.4999999999999977, 0, 0.8660254037844399))) as fillet4_piece_21a_section:
        with BuildLine():
            CenterArc((FILLET4_R, FILLET4_R), FILLET4_R, 180, 90)
            Line((0, FILLET4_R), (0, 0))
            Line((0, 0), (FILLET4_R, 0))
        make_face()
    fillet4_piece_21a = extrude(amount=50, mode=Mode.PRIVATE)
    fillet4_piece_21a = split(fillet4_piece_21a, bisect_by=Plane(origin=(37.75, 0, -10.5), z_dir=(0, 0, 1)), keep=Keep.TOP, mode=Mode.PRIVATE)
    with BuildSketch(Plane(origin=(16.5, 0, -10.5), x_dir=(0, 0, 1), z_dir=(-1, 0, 0))) as fillet4_piece_21b_section:
        with BuildLine():
            CenterArc((FILLET4_R, FILLET4_R), FILLET4_R, 180, 90)
            Line((0, FILLET4_R), (0, 0))
            Line((0, 0), (FILLET4_R, 0))
        make_face()
    fillet4_piece_21b = extrude(amount=16.5, mode=Mode.PRIVATE)
    fillet4_piece_21b = split(fillet4_piece_21b, bisect_by=Plane(origin=(14.625, 0, -11.582531755), z_dir=(0.8660254037844399, 0, 0.4999999999999977)), keep=Keep.TOP, mode=Mode.PRIVATE)
    fillet4_piece_21 = fillet4_piece_21a & fillet4_piece_21b
    add(fillet4_piece_21, mode=Mode.SUBTRACT)


solid = part.part
